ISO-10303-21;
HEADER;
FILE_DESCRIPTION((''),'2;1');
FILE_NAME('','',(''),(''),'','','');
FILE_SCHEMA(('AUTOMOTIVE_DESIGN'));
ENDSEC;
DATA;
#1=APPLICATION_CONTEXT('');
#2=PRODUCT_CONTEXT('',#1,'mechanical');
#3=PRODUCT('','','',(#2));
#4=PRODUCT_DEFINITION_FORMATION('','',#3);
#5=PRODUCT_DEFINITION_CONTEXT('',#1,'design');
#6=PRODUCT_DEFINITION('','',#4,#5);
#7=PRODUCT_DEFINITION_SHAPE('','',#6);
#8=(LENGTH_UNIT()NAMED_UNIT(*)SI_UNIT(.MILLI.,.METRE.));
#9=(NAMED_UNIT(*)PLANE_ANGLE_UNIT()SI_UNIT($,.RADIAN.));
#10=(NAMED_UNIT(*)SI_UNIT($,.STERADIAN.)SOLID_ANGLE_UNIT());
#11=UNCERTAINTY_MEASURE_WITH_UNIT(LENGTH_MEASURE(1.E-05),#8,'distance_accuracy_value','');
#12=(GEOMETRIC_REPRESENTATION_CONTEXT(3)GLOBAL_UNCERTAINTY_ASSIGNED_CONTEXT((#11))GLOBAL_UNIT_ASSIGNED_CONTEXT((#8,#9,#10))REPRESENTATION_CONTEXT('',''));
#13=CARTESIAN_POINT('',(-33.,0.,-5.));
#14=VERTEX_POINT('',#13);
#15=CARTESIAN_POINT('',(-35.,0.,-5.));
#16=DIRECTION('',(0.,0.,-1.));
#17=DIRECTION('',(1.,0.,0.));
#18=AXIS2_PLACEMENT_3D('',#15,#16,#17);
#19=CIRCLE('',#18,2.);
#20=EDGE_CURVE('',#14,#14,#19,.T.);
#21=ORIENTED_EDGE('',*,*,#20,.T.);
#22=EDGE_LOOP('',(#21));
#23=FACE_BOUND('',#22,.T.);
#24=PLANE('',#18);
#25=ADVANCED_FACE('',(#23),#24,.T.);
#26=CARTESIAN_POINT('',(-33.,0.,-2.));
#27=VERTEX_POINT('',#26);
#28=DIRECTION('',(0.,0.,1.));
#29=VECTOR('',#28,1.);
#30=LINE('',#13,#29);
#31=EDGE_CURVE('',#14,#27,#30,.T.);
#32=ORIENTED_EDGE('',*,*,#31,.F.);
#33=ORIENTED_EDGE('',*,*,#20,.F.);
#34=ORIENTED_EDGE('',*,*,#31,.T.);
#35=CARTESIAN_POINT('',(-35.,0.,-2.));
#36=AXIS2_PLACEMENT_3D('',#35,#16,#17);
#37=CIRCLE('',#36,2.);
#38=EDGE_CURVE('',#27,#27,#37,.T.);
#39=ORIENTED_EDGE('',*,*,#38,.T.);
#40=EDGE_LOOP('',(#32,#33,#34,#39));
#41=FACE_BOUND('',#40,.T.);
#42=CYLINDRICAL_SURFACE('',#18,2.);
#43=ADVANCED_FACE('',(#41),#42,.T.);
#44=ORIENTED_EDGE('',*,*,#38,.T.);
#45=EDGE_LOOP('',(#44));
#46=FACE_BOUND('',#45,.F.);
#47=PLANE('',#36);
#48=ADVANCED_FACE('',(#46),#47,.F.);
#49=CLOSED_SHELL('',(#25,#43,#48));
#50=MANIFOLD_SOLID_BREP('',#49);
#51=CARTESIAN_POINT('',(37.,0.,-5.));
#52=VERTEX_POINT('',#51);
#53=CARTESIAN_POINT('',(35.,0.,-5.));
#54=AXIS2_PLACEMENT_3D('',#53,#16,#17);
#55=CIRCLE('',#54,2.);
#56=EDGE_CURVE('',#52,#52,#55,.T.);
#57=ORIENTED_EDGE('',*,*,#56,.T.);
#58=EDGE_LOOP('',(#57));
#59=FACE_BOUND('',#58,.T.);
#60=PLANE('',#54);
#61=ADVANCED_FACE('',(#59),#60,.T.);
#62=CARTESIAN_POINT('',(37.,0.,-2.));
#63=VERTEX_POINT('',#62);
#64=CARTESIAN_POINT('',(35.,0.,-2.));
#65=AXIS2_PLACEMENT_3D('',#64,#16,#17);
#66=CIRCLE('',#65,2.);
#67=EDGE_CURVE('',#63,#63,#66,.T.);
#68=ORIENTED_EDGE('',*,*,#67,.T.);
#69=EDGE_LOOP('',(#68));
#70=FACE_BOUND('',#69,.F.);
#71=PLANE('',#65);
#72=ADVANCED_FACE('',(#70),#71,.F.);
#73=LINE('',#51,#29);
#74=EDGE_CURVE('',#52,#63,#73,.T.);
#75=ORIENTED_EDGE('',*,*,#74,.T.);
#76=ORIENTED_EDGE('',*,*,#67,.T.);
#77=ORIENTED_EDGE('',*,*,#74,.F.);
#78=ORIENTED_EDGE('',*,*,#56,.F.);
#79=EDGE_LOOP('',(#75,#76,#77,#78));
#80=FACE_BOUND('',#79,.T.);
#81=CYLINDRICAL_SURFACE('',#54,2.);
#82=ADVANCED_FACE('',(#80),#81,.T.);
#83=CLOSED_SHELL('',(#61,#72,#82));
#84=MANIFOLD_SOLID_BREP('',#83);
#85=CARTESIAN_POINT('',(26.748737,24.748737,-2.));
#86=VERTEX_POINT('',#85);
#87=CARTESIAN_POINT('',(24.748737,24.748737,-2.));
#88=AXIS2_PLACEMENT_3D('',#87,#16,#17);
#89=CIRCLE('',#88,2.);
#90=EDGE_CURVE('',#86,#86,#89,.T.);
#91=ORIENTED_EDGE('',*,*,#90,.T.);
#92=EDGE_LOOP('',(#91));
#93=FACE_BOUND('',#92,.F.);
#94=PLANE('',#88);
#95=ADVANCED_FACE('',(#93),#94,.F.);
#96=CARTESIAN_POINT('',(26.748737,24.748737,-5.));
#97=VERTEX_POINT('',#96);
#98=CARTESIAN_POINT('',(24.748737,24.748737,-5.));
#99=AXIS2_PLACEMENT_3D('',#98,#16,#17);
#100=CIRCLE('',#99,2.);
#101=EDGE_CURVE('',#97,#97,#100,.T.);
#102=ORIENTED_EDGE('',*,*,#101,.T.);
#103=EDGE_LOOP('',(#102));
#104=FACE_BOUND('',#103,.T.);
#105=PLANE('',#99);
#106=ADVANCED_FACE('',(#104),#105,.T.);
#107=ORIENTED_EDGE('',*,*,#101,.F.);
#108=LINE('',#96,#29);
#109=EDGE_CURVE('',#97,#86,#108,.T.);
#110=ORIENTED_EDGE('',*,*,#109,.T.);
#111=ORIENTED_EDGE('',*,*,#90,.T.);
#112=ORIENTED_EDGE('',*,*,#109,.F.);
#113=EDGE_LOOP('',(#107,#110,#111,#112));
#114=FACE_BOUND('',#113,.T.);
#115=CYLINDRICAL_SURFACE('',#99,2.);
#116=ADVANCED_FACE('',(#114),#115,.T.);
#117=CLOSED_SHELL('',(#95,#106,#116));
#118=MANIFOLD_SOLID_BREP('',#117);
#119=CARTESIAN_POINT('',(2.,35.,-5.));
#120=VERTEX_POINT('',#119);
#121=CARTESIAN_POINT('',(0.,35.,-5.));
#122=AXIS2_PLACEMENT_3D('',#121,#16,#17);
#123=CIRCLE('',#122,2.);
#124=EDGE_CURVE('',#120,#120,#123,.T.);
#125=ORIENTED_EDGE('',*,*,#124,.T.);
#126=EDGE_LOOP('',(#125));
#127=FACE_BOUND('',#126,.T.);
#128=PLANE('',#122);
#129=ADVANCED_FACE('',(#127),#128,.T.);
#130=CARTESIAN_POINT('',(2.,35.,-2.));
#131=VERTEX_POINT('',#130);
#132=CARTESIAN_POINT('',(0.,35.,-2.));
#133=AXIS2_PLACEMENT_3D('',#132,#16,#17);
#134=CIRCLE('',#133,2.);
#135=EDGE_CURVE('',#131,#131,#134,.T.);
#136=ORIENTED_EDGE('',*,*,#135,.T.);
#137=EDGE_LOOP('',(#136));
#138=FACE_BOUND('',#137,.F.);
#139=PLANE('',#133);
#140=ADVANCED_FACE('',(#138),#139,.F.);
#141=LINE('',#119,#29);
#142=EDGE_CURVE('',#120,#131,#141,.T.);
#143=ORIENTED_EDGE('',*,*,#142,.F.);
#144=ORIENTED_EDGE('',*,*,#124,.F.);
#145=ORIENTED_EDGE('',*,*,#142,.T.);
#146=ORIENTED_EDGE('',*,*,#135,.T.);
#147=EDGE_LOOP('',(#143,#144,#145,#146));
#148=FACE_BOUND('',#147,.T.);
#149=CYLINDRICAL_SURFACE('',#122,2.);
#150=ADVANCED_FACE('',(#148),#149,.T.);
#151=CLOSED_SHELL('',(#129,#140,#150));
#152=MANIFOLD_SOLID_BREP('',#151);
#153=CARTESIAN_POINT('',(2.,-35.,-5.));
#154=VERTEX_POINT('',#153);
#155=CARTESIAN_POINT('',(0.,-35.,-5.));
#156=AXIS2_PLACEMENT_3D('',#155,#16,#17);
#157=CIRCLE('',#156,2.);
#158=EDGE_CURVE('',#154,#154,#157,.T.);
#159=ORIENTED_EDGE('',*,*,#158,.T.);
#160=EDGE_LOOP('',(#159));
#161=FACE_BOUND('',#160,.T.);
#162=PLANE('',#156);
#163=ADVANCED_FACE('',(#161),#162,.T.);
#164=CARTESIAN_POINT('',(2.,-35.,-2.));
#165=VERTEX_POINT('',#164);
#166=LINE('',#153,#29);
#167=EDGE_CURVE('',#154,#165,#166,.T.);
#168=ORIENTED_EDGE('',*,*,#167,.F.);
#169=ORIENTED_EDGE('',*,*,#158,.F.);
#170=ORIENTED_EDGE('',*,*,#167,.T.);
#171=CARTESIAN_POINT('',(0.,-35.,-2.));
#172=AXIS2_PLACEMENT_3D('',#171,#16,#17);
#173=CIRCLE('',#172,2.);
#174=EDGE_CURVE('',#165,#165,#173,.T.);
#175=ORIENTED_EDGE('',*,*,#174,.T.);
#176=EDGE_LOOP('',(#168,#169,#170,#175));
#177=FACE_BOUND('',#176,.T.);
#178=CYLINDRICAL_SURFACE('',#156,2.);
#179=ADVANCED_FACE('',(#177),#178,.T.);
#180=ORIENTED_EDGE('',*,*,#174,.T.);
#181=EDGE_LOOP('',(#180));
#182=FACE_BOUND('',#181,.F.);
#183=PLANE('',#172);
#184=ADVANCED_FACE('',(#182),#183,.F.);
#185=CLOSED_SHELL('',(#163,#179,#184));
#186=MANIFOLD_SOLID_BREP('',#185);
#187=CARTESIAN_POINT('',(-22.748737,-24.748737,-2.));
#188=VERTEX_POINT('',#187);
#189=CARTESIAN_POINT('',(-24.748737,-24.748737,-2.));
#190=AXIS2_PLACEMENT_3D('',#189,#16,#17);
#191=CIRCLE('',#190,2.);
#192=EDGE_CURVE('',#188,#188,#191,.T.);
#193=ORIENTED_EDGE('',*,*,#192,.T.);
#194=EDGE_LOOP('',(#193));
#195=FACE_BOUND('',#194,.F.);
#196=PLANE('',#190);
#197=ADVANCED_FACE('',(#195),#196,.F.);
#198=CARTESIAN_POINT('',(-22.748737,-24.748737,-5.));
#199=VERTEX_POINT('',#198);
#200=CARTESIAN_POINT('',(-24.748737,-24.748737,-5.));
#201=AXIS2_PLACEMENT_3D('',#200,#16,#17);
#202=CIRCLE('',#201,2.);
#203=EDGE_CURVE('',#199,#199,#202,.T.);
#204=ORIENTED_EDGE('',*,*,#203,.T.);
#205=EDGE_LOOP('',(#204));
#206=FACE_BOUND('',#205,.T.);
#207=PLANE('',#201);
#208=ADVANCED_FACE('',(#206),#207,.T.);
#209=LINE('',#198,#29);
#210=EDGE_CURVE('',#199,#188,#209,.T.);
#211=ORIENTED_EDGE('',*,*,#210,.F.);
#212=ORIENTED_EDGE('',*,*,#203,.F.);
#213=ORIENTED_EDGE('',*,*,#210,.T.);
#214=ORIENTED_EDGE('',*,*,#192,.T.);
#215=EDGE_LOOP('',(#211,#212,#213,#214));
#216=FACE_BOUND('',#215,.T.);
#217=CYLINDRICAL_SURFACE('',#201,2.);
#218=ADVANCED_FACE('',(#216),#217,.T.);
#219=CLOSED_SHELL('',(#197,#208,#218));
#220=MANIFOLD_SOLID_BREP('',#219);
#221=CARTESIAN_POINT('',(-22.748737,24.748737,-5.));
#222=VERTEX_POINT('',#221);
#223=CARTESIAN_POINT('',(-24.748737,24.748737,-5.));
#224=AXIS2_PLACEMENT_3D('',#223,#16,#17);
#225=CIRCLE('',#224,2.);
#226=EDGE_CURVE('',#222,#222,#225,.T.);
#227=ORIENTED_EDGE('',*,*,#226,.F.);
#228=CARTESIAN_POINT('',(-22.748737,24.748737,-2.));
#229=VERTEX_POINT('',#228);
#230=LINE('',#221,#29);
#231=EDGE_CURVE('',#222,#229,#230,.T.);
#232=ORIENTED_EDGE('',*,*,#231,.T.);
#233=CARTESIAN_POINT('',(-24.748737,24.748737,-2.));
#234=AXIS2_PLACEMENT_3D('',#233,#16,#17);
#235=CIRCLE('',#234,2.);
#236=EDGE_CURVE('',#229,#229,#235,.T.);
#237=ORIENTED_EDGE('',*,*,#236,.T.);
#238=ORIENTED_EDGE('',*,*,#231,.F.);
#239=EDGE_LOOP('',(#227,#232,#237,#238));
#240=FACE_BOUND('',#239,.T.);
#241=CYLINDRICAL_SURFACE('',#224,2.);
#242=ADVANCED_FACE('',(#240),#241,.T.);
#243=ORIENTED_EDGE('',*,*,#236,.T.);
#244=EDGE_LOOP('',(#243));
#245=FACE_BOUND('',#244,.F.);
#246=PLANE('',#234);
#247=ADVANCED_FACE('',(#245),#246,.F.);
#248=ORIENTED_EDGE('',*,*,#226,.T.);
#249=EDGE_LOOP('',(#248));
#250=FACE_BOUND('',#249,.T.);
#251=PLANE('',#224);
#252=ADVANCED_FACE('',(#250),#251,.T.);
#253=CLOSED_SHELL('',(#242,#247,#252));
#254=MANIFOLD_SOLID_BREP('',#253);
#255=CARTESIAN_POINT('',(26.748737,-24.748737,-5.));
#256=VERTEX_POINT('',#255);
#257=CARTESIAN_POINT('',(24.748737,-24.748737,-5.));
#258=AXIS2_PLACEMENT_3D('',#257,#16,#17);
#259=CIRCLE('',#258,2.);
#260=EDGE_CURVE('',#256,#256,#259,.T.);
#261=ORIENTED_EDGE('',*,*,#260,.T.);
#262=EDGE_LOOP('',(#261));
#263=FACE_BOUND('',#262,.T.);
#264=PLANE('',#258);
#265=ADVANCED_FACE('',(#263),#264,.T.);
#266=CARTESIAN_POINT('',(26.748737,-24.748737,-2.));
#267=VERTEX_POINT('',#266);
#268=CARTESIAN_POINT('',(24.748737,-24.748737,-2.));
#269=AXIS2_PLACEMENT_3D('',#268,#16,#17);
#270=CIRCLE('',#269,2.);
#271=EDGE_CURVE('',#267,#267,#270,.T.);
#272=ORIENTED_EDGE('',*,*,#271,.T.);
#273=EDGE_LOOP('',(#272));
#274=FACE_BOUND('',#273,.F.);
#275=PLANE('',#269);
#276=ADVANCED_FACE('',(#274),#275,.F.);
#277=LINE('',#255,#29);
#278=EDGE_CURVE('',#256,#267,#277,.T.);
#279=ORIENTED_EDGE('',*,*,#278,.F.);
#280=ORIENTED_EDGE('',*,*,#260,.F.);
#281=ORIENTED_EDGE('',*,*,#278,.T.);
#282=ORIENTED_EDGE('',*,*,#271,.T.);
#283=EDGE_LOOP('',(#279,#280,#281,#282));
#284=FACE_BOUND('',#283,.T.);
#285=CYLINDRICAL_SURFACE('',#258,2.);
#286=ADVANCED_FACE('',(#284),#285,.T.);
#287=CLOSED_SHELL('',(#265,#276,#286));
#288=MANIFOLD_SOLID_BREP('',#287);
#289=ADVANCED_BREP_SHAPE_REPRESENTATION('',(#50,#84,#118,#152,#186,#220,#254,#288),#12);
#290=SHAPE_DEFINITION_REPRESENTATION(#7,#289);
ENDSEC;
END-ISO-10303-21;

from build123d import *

# Parameters (mm, degrees)
F2_R     = 2
F3_DEPTH = 3


# Not quite as in the source:
# - a feature of the source that left no trace in its solid (it failed there, or was rolled back) is left out
# - the program builds the solid bodies; features that only make, move or delete a surface that nothing else refers to are left out


with BuildPart() as f3:
    # F2 (on face) → F3 (new body)
    with BuildSketch(Plane(origin=(0, 0, -5), x_dir=(1, 0, 0), z_dir=(0, 0, -1))):
        with Locations((0, -35)):
            Circle(F2_R)
    extrude(amount=-F3_DEPTH)


with BuildPart() as f3b:
    # F2 (on face) → F3, piece 2 (new body)
    with BuildSketch(Plane(origin=(0, 0, -5), x_dir=(1, 0, 0), z_dir=(0, 0, -1))):
        with Locations((24.7487373415, -24.7487373415)):
            Circle(F2_R)
    extrude(amount=-F3_DEPTH)


with BuildPart() as f3c:
    # F2 (on face) → F3, piece 3 (new body)
    with BuildSketch(Plane(origin=(0, 0, -5), x_dir=(1, 0, 0), z_dir=(0, 0, -1))):
        with Locations((35, 0)):
            Circle(F2_R)
    extrude(amount=-F3_DEPTH)


with BuildPart() as f3d:
    # F2 (on face) → F3, piece 4 (new body)
    with BuildSketch(Plane(origin=(0, 0, -5), x_dir=(1, 0, 0), z_dir=(0, 0, -1))):
        with Locations((24.7487373415, 24.7487373415)):
            Circle(F2_R)
    extrude(amount=-F3_DEPTH)


with BuildPart() as f3e:
    # F2 (on face) → F3, piece 5 (new body)
    with BuildSketch(Plane(origin=(0, 0, -5), x_dir=(1, 0, 0), z_dir=(0, 0, -1))):
        with Locations((0, 35)):
            Circle(F2_R)
    extrude(amount=-F3_DEPTH)


with BuildPart() as f3f:
    # F2 (on face) → F3, piece 6 (new body)
    with BuildSketch(Plane(origin=(0, 0, -5), x_dir=(1, 0, 0), z_dir=(0, 0, -1))):
        with Locations((-24.7487373415, 24.7487373415)):
            Circle(F2_R)
    extrude(amount=-F3_DEPTH)


with BuildPart() as f3g:
    # F2 (on face) → F3, piece 7 (new body)
    with BuildSketch(Plane(origin=(0, 0, -5), x_dir=(1, 0, 0), z_dir=(0, 0, -1))):
        with Locations((-35, 0)):
            Circle(F2_R)
    extrude(amount=-F3_DEPTH)


with BuildPart() as f3h:
    # F2 (on face) → F3, piece 8 (new body)
    with BuildSketch(Plane(origin=(0, 0, -5), x_dir=(1, 0, 0), z_dir=(0, 0, -1))):
        with Locations((-24.7487373415, -24.7487373415)):
            Circle(F2_R)
    extrude(amount=-F3_DEPTH)


solid = Compound([f3.part, f3b.part, f3c.part, f3d.part, f3e.part, f3f.part, f3g.part, f3h.part])
